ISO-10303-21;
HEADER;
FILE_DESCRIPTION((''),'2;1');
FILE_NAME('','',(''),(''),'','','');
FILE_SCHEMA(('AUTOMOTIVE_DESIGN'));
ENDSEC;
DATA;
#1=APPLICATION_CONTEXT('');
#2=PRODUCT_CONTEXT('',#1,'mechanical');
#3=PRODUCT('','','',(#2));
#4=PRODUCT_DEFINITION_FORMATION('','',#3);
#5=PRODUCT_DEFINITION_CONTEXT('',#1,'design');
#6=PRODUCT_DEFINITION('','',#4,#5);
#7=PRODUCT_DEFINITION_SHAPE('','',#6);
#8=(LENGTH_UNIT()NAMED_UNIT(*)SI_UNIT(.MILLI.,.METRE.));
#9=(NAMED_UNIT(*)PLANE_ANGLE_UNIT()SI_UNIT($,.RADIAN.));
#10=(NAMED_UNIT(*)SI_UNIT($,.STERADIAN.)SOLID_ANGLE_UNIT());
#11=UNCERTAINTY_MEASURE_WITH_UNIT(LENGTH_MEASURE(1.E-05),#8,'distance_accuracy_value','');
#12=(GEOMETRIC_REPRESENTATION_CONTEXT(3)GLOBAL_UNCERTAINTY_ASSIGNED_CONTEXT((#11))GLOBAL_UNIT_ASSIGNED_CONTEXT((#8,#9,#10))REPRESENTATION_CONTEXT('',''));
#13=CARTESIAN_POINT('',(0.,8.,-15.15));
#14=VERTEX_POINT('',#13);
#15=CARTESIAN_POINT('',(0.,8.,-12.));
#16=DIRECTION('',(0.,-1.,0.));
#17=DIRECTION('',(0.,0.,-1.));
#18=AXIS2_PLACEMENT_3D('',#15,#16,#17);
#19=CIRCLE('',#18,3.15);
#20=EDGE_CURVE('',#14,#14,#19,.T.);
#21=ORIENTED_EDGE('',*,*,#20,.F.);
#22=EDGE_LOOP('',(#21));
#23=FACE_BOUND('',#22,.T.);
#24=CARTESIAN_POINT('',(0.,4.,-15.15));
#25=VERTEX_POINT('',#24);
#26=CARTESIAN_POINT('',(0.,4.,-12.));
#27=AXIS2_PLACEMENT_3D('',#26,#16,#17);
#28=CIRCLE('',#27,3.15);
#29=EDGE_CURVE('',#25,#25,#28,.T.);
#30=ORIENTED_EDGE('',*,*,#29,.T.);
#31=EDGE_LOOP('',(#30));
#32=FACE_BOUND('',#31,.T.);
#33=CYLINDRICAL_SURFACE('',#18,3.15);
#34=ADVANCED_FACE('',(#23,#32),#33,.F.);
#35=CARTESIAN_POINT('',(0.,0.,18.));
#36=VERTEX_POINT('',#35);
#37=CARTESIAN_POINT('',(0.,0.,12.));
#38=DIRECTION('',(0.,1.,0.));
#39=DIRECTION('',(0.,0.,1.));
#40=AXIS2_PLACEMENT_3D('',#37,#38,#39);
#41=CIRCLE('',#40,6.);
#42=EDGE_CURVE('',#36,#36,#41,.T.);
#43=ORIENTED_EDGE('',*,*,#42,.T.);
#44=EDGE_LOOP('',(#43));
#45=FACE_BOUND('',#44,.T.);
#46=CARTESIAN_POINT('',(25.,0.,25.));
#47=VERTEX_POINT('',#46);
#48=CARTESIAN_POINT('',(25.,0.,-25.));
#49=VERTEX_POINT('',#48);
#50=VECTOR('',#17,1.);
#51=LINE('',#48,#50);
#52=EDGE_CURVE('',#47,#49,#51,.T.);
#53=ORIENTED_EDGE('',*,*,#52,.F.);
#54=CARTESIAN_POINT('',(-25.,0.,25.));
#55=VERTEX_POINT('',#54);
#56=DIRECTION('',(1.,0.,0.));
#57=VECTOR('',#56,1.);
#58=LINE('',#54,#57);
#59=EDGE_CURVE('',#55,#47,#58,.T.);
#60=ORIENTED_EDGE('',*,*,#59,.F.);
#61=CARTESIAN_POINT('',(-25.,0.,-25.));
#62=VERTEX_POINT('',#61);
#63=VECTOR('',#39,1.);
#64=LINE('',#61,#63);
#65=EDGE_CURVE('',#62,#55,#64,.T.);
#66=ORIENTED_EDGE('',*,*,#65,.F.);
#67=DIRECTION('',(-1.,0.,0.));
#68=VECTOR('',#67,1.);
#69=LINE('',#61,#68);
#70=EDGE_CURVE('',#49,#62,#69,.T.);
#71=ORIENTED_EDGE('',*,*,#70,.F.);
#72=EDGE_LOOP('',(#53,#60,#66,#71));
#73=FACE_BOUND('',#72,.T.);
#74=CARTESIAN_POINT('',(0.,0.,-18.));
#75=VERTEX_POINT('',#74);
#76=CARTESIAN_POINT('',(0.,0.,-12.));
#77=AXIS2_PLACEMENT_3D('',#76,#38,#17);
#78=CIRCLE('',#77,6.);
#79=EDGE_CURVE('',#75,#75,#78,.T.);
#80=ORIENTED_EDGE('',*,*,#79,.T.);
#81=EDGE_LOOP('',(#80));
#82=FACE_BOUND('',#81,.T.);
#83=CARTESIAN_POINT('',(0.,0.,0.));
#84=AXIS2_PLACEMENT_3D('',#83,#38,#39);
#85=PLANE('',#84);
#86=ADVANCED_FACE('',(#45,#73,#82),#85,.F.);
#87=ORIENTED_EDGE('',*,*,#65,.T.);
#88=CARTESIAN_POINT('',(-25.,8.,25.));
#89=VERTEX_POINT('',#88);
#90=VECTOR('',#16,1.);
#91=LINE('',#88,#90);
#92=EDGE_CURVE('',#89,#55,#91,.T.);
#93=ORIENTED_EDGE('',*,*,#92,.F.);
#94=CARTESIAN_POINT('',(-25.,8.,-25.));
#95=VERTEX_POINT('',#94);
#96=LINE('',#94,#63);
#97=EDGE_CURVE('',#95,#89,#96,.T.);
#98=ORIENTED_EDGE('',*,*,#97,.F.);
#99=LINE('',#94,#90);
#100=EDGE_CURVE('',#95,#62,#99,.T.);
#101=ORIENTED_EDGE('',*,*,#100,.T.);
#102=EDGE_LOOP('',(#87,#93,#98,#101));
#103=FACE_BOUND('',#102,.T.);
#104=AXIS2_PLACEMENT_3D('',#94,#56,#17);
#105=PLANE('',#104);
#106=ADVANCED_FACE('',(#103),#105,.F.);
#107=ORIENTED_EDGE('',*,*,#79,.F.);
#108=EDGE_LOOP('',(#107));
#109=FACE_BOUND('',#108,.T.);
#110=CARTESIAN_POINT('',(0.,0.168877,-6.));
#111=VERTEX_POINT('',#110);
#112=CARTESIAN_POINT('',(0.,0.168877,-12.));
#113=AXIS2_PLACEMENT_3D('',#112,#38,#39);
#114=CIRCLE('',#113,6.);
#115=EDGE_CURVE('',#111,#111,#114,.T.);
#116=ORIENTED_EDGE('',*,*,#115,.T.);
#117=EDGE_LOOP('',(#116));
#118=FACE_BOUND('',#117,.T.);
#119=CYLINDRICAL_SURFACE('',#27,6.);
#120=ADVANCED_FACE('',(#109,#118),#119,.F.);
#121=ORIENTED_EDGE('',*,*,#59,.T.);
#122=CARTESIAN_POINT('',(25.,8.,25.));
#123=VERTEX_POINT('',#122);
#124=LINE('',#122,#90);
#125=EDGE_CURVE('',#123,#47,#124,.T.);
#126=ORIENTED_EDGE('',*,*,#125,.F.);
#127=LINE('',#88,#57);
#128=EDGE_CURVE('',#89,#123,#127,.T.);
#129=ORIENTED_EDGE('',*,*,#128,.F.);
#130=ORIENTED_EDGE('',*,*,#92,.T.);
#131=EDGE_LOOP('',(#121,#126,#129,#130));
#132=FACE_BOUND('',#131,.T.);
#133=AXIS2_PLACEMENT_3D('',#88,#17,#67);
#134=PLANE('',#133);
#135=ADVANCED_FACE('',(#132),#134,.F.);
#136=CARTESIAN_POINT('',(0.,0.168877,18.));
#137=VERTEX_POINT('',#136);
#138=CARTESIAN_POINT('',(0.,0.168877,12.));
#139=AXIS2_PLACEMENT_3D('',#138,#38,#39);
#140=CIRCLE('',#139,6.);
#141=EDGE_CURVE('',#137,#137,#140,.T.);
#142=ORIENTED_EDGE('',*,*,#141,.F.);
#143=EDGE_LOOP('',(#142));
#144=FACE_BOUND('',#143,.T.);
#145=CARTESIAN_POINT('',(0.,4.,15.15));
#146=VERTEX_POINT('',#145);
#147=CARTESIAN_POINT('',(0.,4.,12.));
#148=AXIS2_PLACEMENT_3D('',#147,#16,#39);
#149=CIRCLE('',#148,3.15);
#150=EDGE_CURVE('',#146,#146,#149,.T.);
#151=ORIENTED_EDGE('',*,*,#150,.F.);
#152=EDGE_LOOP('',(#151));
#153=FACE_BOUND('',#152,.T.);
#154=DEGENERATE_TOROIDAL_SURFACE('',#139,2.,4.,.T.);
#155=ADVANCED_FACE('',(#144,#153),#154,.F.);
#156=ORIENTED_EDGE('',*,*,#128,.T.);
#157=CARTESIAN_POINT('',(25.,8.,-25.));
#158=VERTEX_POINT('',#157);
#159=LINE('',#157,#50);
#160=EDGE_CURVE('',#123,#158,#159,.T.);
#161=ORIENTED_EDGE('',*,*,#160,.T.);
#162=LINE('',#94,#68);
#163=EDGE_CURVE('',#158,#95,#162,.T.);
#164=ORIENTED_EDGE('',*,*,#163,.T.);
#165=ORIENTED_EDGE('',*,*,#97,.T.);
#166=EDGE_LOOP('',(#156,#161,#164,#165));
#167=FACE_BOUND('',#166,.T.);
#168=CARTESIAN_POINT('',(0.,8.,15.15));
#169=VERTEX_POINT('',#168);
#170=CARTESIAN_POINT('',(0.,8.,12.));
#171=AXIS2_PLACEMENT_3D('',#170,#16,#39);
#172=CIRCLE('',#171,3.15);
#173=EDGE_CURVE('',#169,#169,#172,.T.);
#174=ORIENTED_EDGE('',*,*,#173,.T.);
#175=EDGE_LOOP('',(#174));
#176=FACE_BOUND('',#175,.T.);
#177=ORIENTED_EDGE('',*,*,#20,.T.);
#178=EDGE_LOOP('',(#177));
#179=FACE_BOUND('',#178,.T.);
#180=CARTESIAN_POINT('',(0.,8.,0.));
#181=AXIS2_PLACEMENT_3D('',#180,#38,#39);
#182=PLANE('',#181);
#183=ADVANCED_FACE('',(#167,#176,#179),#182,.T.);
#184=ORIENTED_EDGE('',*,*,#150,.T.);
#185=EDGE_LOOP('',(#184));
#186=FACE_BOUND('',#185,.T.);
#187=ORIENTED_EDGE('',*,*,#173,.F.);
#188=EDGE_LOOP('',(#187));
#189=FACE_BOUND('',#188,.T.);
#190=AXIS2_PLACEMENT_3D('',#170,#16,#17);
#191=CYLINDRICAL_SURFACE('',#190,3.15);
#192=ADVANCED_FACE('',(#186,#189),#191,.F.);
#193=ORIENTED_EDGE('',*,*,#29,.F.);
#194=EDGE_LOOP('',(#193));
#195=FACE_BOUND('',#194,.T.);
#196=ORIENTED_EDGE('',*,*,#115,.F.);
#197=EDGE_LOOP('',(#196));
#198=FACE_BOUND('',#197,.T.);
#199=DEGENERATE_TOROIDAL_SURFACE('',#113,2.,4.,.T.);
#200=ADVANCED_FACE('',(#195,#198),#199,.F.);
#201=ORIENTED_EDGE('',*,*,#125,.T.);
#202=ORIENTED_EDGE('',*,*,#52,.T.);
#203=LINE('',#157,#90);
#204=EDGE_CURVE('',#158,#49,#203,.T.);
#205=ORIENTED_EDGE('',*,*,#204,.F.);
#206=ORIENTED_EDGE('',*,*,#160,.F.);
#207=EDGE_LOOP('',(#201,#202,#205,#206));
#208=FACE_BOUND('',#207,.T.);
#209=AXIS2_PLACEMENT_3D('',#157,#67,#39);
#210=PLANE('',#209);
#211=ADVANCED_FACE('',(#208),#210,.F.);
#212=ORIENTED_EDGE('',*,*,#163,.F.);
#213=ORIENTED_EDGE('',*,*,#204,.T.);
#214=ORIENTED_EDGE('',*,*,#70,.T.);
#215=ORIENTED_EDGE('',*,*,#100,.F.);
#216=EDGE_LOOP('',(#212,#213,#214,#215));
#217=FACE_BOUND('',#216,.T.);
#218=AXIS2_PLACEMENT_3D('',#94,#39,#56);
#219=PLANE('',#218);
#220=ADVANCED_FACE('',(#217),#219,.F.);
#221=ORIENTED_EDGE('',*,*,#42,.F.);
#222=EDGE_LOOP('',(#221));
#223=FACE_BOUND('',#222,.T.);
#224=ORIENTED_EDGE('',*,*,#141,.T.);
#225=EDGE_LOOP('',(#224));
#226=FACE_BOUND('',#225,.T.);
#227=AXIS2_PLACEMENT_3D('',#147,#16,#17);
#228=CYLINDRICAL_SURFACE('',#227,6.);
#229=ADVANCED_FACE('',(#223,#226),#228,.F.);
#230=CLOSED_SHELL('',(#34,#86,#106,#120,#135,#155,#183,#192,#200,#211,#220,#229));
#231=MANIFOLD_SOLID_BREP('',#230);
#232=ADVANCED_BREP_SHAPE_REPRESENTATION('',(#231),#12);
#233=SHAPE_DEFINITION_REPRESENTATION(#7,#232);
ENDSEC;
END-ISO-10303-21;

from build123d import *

# Parameters (mm, degrees)
SKETCH1_W           = 50
SKETCH1_H           = 50
BOSS_EXTRUDE1_DEPTH = 8
SKETCH2_R           = 6
CUT_EXTRUDE2_DEPTH  = 4
SKETCH4_R           = 3.15
CUT_EXTRUDE3_DEPTH  = 4
FILLET1_R           = 4


with BuildPart() as part:
    # Sketch1 → Boss-Extrude1 (new body)
    with BuildSketch(Plane(origin=(0, 0, 0), x_dir=(1, 0, 0), z_dir=(0, 1, 0))):
        Rectangle(SKETCH1_W, SKETCH1_H)
    extrude(amount=BOSS_EXTRUDE1_DEPTH)

    # Sketch2 → Cut-Extrude2 (cut)
    with BuildSketch(Plane(origin=(0, 0, 0), x_dir=(1, 0, 0), z_dir=(0, 1, 0))):
        with Locations(Location((0, -12, 0), (0, 0, 270))):
            Circle(SKETCH2_R)
        with Locations(Location((0, 12, 0), (0, 0, 90))):
            Circle(SKETCH2_R)
    extrude(amount=CUT_EXTRUDE2_DEPTH, mode=Mode.SUBTRACT)

    # Sketch4 → Cut-Extrude3 (cut)
    with BuildSketch(Plane.XZ.offset(-4)):
        with Locations(Location((0, -12, 0), (0, 0, 270))):
            Circle(SKETCH4_R)
        with Locations(Location((0, 12, 0), (0, 0, 90))):
            Circle(SKETCH4_R)
    extrude(amount=-CUT_EXTRUDE3_DEPTH, mode=Mode.SUBTRACT)

    # Fillet1
    # the kernel refuses this fillet: 4 mm, written as the material it adds along each edge
    with BuildSketch(Plane(origin=(0, 4, 12), x_dir=(0, 0, 1), z_dir=(-1, 0, 0))) as fillet1_piece_1:
        with BuildLine():
            CenterArc((2, -3.831122551), FILLET1_R, 0, 73.291656284)
            Line((3.15, 0), (3.173, 0.076622451))
            ThreePointArc((3.173, 0.076622451), (4.575, 0.08), (6, 0.08))
            Line((6, 0.08), (6.08, 0))
            Line((6.08, 0), (6.08, -3.831122551))
            Line((6.08, -3.831122551), (6, -3.831122551))
        make_face()
    revolve(axis=Axis((0, 4, 12), (0, 1, 0)))
    with BuildSketch(Plane(origin=(0, 4, -12), x_dir=(0, 0, -1), z_dir=(1, 0, 0))) as fillet1_piece_2:
        with BuildLine():
            CenterArc((2, -3.831122551), FILLET1_R, 0, 73.291656284)
            Line((3.15, 0), (3.173, 0.076622451))
            ThreePointArc((3.173, 0.076622451), (4.575, 0.08), (6, 0.08))
            Line((6, 0.08), (6.08, 0))
            Line((6.08, 0), (6.08, -3.831122551))
            Line((6.08, -3.831122551), (6, -3.831122551))
        make_face()
    revolve(axis=Axis((0, 4, -12), (0, 1, 0)))


solid = part.part
